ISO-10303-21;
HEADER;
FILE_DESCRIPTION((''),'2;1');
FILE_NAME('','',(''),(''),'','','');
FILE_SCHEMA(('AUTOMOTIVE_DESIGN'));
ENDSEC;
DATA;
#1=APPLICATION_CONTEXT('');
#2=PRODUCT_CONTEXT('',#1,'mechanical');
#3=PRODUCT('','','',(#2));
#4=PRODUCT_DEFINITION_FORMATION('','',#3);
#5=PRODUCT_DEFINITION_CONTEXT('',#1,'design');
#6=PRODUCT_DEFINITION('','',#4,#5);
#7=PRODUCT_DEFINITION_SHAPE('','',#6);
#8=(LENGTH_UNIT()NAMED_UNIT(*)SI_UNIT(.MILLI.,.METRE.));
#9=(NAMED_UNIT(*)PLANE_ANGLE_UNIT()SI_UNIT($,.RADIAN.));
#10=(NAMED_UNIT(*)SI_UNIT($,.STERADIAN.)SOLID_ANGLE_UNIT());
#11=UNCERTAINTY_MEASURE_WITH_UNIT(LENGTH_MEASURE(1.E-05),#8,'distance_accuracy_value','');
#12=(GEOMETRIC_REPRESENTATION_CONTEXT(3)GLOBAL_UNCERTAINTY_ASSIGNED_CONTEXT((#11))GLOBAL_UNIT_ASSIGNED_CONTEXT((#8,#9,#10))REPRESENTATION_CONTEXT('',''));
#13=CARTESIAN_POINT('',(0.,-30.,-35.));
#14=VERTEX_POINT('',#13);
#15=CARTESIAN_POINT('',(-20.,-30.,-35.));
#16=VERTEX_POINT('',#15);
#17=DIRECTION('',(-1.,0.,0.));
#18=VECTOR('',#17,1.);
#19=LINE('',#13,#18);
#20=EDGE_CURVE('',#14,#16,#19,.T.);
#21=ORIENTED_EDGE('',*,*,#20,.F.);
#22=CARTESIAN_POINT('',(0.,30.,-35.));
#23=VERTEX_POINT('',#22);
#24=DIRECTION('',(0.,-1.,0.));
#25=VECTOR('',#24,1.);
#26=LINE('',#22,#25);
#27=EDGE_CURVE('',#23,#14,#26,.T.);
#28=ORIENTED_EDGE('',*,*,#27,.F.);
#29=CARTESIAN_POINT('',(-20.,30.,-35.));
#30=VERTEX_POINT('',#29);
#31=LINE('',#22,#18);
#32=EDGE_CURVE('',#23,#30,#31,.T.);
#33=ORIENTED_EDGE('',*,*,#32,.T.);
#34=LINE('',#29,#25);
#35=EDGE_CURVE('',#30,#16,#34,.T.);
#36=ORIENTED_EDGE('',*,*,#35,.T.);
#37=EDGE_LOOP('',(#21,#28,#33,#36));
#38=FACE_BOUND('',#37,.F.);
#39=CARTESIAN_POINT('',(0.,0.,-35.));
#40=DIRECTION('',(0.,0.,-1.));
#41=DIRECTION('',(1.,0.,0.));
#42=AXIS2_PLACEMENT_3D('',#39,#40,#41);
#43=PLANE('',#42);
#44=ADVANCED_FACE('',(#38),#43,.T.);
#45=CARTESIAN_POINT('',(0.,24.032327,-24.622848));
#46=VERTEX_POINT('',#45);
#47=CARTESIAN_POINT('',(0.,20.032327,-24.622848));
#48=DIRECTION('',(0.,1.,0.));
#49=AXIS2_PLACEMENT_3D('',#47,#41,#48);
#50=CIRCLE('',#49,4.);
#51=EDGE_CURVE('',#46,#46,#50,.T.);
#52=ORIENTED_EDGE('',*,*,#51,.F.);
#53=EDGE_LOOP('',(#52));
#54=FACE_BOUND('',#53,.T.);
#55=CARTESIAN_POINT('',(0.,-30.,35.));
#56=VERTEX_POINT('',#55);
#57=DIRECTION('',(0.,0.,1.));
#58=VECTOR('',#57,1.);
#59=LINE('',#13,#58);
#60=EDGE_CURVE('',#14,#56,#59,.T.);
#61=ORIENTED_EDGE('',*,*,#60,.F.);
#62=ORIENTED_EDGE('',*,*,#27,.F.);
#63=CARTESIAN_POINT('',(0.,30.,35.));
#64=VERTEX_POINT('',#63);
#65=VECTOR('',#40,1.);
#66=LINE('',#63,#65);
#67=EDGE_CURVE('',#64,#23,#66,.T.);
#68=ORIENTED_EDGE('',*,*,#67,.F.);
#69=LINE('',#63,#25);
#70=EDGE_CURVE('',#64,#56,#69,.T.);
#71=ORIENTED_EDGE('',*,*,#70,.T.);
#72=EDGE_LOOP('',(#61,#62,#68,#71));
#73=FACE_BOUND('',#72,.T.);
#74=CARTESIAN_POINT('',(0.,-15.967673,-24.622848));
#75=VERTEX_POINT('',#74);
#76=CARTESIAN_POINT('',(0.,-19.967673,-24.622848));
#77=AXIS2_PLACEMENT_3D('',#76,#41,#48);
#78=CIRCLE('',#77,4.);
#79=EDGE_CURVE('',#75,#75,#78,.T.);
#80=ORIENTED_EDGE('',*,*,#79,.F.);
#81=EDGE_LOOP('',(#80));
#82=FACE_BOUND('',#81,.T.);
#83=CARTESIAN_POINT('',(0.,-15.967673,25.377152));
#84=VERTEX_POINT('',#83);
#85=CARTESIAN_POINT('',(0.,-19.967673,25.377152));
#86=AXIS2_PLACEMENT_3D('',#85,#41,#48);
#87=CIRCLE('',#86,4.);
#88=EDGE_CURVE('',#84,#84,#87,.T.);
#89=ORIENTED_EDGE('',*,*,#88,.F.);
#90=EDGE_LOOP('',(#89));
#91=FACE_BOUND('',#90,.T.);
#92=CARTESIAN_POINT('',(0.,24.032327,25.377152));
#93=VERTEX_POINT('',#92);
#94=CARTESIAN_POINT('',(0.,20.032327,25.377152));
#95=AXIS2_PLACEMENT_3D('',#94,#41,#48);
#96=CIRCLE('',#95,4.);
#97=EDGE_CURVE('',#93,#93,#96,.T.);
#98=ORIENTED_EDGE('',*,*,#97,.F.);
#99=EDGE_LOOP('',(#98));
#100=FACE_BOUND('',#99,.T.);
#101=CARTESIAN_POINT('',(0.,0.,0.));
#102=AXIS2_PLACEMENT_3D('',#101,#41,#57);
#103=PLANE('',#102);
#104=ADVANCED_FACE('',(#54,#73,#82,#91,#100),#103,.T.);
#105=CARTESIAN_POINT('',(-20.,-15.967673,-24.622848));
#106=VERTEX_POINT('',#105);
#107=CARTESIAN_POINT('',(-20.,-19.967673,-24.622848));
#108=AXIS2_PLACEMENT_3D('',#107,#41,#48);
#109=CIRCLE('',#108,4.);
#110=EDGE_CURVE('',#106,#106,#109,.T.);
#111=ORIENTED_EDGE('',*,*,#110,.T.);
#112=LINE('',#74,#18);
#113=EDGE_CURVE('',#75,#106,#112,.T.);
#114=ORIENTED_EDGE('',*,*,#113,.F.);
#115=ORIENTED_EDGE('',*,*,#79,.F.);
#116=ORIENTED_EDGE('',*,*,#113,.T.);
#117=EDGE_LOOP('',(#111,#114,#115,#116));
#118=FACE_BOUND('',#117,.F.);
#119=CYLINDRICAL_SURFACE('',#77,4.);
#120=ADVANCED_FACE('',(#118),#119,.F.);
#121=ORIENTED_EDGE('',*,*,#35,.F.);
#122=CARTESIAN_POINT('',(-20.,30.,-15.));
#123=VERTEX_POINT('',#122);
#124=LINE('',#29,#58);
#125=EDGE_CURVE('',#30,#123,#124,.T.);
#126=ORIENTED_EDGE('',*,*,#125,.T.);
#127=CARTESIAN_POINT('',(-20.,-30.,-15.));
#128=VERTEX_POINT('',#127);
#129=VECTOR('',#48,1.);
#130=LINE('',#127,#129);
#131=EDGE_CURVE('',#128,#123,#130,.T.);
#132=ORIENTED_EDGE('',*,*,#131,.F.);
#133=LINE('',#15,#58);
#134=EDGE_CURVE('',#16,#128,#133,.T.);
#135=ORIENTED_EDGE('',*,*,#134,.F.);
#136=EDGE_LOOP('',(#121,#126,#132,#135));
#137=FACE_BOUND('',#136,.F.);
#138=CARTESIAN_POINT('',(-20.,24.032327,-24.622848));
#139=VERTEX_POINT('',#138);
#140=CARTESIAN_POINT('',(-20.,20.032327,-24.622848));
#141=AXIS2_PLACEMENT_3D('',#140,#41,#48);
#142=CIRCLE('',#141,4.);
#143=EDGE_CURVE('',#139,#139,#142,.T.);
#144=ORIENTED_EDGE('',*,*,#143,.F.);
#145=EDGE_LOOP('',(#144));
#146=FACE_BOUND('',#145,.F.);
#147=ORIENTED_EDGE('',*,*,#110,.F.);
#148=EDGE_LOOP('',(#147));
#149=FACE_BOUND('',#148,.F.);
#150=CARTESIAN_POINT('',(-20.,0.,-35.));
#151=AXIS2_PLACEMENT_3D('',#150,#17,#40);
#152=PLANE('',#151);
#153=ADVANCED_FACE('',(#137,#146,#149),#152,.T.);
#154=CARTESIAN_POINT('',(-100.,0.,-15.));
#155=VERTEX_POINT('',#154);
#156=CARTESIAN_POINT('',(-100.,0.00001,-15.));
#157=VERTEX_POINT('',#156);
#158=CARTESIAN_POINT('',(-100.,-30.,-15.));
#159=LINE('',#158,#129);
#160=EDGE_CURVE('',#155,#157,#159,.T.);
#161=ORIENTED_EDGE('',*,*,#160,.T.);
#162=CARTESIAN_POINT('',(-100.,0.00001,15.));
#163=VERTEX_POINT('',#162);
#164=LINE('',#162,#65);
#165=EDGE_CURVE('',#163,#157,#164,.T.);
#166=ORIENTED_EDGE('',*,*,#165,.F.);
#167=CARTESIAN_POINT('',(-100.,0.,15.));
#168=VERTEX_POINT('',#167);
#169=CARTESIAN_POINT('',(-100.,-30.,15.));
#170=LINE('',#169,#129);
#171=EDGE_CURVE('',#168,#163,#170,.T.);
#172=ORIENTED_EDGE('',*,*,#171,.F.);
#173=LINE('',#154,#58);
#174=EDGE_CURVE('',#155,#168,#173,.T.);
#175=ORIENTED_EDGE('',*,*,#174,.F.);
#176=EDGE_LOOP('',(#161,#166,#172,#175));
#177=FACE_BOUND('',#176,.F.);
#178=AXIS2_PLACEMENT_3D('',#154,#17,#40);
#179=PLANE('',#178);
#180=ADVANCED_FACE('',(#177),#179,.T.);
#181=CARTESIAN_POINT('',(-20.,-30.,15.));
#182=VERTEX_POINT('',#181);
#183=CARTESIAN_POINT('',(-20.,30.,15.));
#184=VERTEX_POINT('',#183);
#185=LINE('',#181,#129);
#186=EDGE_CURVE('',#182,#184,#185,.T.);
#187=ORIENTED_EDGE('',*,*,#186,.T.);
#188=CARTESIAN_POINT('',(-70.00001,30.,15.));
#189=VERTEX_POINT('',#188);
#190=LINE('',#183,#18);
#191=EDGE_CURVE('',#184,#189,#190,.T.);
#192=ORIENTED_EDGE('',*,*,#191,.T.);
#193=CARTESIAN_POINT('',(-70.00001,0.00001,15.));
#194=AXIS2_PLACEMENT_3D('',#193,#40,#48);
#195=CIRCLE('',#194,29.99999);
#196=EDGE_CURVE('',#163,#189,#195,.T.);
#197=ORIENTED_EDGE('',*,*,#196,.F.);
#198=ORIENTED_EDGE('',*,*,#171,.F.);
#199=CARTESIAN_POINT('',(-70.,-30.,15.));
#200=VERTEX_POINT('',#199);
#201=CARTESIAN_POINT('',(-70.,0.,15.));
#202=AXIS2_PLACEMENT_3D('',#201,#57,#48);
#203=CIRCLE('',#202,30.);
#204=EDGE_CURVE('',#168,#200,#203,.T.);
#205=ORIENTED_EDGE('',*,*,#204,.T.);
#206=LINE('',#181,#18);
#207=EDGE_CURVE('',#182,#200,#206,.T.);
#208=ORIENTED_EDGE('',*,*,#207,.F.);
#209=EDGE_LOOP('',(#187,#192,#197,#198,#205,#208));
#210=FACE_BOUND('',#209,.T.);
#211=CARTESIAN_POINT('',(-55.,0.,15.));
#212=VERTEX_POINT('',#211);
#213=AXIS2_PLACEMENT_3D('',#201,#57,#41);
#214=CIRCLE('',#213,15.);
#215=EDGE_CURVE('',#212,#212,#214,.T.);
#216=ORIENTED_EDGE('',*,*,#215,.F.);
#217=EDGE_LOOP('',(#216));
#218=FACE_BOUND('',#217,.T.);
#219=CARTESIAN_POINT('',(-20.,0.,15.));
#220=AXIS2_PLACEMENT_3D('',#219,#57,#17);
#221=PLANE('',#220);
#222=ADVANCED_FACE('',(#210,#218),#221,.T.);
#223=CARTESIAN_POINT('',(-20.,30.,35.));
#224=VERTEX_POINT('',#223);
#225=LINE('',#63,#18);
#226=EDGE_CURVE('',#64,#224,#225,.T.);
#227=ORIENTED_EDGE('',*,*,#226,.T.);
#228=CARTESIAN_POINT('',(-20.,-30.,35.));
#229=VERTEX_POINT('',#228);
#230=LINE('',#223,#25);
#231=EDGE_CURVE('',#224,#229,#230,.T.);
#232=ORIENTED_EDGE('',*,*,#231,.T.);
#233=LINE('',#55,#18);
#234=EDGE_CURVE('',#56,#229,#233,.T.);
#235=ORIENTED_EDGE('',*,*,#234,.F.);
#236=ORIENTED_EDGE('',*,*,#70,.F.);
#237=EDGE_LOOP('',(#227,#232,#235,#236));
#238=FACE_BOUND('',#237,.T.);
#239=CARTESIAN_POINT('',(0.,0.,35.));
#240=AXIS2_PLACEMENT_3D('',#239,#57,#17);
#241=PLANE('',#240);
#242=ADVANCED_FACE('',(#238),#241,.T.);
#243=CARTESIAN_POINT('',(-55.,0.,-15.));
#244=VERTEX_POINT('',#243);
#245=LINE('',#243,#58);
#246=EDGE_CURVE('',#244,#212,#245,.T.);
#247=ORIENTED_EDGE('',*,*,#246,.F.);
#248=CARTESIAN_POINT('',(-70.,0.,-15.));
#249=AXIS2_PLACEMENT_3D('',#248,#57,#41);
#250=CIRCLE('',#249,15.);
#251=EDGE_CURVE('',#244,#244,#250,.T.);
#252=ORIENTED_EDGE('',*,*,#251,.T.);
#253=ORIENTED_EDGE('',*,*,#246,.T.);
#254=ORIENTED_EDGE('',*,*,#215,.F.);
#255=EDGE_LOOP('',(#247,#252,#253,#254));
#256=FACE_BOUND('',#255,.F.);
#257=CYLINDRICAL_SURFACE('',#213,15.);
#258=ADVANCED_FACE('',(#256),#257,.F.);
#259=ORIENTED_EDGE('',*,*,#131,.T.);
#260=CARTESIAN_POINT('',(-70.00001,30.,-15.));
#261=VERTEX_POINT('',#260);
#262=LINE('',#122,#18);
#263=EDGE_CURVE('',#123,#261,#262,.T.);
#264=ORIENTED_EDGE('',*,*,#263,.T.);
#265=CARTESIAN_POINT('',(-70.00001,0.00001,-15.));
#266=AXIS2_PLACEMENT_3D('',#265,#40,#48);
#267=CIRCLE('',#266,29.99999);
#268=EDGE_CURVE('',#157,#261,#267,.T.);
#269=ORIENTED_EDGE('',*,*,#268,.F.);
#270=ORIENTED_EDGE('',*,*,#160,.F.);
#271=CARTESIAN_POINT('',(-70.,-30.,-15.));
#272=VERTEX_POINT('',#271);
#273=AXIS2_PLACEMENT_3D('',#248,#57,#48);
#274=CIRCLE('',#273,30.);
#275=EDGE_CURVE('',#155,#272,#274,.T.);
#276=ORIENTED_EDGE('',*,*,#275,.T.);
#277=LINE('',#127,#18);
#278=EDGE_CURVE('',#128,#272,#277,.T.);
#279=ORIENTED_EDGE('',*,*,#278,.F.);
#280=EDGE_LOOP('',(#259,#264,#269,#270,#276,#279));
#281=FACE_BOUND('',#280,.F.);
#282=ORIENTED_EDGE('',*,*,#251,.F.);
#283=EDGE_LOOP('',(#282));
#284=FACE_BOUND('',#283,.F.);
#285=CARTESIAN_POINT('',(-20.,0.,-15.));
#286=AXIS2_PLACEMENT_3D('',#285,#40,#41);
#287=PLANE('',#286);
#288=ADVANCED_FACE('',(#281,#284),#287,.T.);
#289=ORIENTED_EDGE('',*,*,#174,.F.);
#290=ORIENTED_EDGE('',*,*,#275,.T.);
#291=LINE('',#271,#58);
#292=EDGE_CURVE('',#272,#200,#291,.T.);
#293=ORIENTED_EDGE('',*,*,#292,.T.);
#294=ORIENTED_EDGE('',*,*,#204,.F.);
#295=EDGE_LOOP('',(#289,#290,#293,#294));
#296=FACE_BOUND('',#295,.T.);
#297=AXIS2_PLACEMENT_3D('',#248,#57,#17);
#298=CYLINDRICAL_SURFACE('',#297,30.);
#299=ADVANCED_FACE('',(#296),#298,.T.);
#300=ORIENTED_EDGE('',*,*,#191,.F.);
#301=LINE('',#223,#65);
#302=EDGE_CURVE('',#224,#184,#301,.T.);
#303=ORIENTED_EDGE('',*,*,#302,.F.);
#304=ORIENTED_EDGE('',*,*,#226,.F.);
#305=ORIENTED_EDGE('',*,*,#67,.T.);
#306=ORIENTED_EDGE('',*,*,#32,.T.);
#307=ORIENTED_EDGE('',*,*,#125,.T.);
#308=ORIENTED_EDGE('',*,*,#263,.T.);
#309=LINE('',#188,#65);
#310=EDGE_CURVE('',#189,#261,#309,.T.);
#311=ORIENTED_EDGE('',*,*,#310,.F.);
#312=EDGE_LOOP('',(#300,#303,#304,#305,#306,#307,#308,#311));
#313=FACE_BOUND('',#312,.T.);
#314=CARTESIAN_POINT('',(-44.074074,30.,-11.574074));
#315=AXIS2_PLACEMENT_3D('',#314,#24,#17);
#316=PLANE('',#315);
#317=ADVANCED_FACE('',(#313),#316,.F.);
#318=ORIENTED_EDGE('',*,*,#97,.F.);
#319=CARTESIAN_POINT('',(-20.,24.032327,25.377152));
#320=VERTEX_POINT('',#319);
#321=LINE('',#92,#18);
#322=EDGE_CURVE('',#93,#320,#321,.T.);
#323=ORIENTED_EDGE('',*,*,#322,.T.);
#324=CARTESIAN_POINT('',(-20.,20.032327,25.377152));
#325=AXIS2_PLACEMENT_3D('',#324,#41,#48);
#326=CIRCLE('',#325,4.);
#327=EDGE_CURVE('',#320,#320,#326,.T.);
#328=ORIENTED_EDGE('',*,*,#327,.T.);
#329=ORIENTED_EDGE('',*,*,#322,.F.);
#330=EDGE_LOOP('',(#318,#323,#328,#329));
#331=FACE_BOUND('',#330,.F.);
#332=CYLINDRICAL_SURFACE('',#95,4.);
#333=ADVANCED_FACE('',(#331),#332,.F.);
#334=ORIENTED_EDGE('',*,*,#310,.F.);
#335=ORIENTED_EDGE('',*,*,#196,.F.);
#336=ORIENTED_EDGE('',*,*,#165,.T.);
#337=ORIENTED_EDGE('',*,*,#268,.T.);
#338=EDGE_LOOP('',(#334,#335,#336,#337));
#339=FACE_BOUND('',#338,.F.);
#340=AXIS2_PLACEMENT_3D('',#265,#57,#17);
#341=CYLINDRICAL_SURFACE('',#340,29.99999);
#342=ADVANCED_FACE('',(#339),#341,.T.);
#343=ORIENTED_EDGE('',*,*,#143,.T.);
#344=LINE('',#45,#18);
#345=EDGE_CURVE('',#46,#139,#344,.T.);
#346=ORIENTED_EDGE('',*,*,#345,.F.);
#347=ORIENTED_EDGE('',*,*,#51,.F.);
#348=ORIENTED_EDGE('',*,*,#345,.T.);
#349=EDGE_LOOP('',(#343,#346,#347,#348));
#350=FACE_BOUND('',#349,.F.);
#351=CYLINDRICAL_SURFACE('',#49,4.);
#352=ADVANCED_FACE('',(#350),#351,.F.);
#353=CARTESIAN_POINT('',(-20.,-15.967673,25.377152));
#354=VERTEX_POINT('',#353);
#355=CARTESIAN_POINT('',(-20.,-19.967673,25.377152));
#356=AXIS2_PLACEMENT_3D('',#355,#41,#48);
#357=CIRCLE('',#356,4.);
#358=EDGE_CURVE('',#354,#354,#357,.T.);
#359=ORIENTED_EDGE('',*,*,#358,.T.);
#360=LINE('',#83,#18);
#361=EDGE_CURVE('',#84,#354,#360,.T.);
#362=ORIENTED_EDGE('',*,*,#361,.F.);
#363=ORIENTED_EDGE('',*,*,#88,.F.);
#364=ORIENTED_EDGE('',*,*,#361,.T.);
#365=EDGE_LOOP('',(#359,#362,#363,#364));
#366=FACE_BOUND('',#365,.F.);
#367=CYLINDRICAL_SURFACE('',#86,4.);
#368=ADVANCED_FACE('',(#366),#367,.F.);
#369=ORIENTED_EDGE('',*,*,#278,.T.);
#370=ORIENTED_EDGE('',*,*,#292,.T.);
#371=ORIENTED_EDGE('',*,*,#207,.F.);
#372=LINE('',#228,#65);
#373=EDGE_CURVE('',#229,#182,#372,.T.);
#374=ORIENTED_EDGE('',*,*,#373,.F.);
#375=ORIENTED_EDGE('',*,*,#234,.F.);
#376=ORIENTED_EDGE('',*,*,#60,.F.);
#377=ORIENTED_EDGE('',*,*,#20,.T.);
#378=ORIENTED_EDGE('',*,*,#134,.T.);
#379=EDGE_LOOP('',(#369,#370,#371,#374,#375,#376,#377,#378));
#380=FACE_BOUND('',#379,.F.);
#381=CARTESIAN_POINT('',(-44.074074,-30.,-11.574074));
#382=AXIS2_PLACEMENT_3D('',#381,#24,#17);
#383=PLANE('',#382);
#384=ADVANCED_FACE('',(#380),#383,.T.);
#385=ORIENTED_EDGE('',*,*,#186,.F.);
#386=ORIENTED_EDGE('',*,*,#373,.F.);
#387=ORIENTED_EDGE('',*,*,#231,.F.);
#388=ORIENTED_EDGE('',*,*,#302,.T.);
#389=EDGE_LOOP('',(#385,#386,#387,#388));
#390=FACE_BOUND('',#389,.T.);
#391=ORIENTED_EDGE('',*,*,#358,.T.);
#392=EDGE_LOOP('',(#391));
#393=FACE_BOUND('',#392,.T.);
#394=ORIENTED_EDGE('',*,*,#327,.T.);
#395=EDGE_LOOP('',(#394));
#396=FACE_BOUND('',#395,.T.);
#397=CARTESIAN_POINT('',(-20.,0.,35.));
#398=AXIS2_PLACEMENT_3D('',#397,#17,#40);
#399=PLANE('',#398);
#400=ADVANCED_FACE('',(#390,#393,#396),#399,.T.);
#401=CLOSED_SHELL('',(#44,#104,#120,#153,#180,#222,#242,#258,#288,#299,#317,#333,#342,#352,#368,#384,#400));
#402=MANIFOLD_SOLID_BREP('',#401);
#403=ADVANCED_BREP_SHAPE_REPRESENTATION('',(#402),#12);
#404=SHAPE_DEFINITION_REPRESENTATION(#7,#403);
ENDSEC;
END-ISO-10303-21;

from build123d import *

# Parameters (mm, degrees)
F1_DEPTH = 30
F2_R     = 30
F3_R     = 29.99999
F4_R     = 15
F5_DEPTH = 15
F7_R     = 4
F8_DEPTH = 20


# Not quite as in the source:
# - a fillet or chamfer is up to 0.001 mm smaller than in the source, because OpenCascade refuses the exact size


with BuildPart() as f1:
    # F0 (on Front) → F1 (new body, symmetric)
    with BuildSketch(Plane.XZ):
        Polygon((-100, 0), (0, 0), (0, 35), (-20, 35), (-20, 15), (-100, 15), align=None)
    extrude(amount=F1_DEPTH, both=True)

    # F2
    f2_edges = [f1.edges().sort_by_distance(p)[0] for p in [
        (-100, -30, 7.5),
    ]]
    fillet(f2_edges, radius=F2_R)

    # F3 (radius 30 in the source; OpenCascade refuses exactly that, so slightly less here)
    f3_edges = [f1.edges().sort_by_distance(p)[0] for p in [
        (-100, 30, 7.5),
    ]]
    fillet(f3_edges, radius=F3_R)

    # F4 (on face) → F5 (cut, through all)
    with BuildSketch(Plane.XY.offset(15)):
        with Locations((-70, 0)):
            Circle(F4_R)
    extrude(amount=-F5_DEPTH, mode=Mode.SUBTRACT)

    # F6: F1 across plane


with BuildPart() as f1_1:
    add(f1.part)
    add(f1.part.mirror(Plane.XY))

    # F7 (on Right) → F8 (cut, through all)
    with BuildSketch(Plane.YZ):
        with Locations((-19.9676731229, 25.3771519661)):
            Circle(F7_R)
        with Locations((20.0323268771, 25.3771519661)):
            Circle(F7_R)
        with BuildLine():
            ThreePointArc((-23.9676731229, -24.6228480339), (-19.9676731229, -28.6228480339), (-15.9676731229, -24.6228480339))
            ThreePointArc((-15.9676731229, -24.6228480339), (-19.9676731229, -20.6228480339), (-23.9676731229, -24.6228480339))
        make_face()
        with Locations((20.0323268771, -24.6228480339)):
            Circle(F7_R)
    extrude(amount=-F8_DEPTH, mode=Mode.SUBTRACT)


solid = f1_1.part
